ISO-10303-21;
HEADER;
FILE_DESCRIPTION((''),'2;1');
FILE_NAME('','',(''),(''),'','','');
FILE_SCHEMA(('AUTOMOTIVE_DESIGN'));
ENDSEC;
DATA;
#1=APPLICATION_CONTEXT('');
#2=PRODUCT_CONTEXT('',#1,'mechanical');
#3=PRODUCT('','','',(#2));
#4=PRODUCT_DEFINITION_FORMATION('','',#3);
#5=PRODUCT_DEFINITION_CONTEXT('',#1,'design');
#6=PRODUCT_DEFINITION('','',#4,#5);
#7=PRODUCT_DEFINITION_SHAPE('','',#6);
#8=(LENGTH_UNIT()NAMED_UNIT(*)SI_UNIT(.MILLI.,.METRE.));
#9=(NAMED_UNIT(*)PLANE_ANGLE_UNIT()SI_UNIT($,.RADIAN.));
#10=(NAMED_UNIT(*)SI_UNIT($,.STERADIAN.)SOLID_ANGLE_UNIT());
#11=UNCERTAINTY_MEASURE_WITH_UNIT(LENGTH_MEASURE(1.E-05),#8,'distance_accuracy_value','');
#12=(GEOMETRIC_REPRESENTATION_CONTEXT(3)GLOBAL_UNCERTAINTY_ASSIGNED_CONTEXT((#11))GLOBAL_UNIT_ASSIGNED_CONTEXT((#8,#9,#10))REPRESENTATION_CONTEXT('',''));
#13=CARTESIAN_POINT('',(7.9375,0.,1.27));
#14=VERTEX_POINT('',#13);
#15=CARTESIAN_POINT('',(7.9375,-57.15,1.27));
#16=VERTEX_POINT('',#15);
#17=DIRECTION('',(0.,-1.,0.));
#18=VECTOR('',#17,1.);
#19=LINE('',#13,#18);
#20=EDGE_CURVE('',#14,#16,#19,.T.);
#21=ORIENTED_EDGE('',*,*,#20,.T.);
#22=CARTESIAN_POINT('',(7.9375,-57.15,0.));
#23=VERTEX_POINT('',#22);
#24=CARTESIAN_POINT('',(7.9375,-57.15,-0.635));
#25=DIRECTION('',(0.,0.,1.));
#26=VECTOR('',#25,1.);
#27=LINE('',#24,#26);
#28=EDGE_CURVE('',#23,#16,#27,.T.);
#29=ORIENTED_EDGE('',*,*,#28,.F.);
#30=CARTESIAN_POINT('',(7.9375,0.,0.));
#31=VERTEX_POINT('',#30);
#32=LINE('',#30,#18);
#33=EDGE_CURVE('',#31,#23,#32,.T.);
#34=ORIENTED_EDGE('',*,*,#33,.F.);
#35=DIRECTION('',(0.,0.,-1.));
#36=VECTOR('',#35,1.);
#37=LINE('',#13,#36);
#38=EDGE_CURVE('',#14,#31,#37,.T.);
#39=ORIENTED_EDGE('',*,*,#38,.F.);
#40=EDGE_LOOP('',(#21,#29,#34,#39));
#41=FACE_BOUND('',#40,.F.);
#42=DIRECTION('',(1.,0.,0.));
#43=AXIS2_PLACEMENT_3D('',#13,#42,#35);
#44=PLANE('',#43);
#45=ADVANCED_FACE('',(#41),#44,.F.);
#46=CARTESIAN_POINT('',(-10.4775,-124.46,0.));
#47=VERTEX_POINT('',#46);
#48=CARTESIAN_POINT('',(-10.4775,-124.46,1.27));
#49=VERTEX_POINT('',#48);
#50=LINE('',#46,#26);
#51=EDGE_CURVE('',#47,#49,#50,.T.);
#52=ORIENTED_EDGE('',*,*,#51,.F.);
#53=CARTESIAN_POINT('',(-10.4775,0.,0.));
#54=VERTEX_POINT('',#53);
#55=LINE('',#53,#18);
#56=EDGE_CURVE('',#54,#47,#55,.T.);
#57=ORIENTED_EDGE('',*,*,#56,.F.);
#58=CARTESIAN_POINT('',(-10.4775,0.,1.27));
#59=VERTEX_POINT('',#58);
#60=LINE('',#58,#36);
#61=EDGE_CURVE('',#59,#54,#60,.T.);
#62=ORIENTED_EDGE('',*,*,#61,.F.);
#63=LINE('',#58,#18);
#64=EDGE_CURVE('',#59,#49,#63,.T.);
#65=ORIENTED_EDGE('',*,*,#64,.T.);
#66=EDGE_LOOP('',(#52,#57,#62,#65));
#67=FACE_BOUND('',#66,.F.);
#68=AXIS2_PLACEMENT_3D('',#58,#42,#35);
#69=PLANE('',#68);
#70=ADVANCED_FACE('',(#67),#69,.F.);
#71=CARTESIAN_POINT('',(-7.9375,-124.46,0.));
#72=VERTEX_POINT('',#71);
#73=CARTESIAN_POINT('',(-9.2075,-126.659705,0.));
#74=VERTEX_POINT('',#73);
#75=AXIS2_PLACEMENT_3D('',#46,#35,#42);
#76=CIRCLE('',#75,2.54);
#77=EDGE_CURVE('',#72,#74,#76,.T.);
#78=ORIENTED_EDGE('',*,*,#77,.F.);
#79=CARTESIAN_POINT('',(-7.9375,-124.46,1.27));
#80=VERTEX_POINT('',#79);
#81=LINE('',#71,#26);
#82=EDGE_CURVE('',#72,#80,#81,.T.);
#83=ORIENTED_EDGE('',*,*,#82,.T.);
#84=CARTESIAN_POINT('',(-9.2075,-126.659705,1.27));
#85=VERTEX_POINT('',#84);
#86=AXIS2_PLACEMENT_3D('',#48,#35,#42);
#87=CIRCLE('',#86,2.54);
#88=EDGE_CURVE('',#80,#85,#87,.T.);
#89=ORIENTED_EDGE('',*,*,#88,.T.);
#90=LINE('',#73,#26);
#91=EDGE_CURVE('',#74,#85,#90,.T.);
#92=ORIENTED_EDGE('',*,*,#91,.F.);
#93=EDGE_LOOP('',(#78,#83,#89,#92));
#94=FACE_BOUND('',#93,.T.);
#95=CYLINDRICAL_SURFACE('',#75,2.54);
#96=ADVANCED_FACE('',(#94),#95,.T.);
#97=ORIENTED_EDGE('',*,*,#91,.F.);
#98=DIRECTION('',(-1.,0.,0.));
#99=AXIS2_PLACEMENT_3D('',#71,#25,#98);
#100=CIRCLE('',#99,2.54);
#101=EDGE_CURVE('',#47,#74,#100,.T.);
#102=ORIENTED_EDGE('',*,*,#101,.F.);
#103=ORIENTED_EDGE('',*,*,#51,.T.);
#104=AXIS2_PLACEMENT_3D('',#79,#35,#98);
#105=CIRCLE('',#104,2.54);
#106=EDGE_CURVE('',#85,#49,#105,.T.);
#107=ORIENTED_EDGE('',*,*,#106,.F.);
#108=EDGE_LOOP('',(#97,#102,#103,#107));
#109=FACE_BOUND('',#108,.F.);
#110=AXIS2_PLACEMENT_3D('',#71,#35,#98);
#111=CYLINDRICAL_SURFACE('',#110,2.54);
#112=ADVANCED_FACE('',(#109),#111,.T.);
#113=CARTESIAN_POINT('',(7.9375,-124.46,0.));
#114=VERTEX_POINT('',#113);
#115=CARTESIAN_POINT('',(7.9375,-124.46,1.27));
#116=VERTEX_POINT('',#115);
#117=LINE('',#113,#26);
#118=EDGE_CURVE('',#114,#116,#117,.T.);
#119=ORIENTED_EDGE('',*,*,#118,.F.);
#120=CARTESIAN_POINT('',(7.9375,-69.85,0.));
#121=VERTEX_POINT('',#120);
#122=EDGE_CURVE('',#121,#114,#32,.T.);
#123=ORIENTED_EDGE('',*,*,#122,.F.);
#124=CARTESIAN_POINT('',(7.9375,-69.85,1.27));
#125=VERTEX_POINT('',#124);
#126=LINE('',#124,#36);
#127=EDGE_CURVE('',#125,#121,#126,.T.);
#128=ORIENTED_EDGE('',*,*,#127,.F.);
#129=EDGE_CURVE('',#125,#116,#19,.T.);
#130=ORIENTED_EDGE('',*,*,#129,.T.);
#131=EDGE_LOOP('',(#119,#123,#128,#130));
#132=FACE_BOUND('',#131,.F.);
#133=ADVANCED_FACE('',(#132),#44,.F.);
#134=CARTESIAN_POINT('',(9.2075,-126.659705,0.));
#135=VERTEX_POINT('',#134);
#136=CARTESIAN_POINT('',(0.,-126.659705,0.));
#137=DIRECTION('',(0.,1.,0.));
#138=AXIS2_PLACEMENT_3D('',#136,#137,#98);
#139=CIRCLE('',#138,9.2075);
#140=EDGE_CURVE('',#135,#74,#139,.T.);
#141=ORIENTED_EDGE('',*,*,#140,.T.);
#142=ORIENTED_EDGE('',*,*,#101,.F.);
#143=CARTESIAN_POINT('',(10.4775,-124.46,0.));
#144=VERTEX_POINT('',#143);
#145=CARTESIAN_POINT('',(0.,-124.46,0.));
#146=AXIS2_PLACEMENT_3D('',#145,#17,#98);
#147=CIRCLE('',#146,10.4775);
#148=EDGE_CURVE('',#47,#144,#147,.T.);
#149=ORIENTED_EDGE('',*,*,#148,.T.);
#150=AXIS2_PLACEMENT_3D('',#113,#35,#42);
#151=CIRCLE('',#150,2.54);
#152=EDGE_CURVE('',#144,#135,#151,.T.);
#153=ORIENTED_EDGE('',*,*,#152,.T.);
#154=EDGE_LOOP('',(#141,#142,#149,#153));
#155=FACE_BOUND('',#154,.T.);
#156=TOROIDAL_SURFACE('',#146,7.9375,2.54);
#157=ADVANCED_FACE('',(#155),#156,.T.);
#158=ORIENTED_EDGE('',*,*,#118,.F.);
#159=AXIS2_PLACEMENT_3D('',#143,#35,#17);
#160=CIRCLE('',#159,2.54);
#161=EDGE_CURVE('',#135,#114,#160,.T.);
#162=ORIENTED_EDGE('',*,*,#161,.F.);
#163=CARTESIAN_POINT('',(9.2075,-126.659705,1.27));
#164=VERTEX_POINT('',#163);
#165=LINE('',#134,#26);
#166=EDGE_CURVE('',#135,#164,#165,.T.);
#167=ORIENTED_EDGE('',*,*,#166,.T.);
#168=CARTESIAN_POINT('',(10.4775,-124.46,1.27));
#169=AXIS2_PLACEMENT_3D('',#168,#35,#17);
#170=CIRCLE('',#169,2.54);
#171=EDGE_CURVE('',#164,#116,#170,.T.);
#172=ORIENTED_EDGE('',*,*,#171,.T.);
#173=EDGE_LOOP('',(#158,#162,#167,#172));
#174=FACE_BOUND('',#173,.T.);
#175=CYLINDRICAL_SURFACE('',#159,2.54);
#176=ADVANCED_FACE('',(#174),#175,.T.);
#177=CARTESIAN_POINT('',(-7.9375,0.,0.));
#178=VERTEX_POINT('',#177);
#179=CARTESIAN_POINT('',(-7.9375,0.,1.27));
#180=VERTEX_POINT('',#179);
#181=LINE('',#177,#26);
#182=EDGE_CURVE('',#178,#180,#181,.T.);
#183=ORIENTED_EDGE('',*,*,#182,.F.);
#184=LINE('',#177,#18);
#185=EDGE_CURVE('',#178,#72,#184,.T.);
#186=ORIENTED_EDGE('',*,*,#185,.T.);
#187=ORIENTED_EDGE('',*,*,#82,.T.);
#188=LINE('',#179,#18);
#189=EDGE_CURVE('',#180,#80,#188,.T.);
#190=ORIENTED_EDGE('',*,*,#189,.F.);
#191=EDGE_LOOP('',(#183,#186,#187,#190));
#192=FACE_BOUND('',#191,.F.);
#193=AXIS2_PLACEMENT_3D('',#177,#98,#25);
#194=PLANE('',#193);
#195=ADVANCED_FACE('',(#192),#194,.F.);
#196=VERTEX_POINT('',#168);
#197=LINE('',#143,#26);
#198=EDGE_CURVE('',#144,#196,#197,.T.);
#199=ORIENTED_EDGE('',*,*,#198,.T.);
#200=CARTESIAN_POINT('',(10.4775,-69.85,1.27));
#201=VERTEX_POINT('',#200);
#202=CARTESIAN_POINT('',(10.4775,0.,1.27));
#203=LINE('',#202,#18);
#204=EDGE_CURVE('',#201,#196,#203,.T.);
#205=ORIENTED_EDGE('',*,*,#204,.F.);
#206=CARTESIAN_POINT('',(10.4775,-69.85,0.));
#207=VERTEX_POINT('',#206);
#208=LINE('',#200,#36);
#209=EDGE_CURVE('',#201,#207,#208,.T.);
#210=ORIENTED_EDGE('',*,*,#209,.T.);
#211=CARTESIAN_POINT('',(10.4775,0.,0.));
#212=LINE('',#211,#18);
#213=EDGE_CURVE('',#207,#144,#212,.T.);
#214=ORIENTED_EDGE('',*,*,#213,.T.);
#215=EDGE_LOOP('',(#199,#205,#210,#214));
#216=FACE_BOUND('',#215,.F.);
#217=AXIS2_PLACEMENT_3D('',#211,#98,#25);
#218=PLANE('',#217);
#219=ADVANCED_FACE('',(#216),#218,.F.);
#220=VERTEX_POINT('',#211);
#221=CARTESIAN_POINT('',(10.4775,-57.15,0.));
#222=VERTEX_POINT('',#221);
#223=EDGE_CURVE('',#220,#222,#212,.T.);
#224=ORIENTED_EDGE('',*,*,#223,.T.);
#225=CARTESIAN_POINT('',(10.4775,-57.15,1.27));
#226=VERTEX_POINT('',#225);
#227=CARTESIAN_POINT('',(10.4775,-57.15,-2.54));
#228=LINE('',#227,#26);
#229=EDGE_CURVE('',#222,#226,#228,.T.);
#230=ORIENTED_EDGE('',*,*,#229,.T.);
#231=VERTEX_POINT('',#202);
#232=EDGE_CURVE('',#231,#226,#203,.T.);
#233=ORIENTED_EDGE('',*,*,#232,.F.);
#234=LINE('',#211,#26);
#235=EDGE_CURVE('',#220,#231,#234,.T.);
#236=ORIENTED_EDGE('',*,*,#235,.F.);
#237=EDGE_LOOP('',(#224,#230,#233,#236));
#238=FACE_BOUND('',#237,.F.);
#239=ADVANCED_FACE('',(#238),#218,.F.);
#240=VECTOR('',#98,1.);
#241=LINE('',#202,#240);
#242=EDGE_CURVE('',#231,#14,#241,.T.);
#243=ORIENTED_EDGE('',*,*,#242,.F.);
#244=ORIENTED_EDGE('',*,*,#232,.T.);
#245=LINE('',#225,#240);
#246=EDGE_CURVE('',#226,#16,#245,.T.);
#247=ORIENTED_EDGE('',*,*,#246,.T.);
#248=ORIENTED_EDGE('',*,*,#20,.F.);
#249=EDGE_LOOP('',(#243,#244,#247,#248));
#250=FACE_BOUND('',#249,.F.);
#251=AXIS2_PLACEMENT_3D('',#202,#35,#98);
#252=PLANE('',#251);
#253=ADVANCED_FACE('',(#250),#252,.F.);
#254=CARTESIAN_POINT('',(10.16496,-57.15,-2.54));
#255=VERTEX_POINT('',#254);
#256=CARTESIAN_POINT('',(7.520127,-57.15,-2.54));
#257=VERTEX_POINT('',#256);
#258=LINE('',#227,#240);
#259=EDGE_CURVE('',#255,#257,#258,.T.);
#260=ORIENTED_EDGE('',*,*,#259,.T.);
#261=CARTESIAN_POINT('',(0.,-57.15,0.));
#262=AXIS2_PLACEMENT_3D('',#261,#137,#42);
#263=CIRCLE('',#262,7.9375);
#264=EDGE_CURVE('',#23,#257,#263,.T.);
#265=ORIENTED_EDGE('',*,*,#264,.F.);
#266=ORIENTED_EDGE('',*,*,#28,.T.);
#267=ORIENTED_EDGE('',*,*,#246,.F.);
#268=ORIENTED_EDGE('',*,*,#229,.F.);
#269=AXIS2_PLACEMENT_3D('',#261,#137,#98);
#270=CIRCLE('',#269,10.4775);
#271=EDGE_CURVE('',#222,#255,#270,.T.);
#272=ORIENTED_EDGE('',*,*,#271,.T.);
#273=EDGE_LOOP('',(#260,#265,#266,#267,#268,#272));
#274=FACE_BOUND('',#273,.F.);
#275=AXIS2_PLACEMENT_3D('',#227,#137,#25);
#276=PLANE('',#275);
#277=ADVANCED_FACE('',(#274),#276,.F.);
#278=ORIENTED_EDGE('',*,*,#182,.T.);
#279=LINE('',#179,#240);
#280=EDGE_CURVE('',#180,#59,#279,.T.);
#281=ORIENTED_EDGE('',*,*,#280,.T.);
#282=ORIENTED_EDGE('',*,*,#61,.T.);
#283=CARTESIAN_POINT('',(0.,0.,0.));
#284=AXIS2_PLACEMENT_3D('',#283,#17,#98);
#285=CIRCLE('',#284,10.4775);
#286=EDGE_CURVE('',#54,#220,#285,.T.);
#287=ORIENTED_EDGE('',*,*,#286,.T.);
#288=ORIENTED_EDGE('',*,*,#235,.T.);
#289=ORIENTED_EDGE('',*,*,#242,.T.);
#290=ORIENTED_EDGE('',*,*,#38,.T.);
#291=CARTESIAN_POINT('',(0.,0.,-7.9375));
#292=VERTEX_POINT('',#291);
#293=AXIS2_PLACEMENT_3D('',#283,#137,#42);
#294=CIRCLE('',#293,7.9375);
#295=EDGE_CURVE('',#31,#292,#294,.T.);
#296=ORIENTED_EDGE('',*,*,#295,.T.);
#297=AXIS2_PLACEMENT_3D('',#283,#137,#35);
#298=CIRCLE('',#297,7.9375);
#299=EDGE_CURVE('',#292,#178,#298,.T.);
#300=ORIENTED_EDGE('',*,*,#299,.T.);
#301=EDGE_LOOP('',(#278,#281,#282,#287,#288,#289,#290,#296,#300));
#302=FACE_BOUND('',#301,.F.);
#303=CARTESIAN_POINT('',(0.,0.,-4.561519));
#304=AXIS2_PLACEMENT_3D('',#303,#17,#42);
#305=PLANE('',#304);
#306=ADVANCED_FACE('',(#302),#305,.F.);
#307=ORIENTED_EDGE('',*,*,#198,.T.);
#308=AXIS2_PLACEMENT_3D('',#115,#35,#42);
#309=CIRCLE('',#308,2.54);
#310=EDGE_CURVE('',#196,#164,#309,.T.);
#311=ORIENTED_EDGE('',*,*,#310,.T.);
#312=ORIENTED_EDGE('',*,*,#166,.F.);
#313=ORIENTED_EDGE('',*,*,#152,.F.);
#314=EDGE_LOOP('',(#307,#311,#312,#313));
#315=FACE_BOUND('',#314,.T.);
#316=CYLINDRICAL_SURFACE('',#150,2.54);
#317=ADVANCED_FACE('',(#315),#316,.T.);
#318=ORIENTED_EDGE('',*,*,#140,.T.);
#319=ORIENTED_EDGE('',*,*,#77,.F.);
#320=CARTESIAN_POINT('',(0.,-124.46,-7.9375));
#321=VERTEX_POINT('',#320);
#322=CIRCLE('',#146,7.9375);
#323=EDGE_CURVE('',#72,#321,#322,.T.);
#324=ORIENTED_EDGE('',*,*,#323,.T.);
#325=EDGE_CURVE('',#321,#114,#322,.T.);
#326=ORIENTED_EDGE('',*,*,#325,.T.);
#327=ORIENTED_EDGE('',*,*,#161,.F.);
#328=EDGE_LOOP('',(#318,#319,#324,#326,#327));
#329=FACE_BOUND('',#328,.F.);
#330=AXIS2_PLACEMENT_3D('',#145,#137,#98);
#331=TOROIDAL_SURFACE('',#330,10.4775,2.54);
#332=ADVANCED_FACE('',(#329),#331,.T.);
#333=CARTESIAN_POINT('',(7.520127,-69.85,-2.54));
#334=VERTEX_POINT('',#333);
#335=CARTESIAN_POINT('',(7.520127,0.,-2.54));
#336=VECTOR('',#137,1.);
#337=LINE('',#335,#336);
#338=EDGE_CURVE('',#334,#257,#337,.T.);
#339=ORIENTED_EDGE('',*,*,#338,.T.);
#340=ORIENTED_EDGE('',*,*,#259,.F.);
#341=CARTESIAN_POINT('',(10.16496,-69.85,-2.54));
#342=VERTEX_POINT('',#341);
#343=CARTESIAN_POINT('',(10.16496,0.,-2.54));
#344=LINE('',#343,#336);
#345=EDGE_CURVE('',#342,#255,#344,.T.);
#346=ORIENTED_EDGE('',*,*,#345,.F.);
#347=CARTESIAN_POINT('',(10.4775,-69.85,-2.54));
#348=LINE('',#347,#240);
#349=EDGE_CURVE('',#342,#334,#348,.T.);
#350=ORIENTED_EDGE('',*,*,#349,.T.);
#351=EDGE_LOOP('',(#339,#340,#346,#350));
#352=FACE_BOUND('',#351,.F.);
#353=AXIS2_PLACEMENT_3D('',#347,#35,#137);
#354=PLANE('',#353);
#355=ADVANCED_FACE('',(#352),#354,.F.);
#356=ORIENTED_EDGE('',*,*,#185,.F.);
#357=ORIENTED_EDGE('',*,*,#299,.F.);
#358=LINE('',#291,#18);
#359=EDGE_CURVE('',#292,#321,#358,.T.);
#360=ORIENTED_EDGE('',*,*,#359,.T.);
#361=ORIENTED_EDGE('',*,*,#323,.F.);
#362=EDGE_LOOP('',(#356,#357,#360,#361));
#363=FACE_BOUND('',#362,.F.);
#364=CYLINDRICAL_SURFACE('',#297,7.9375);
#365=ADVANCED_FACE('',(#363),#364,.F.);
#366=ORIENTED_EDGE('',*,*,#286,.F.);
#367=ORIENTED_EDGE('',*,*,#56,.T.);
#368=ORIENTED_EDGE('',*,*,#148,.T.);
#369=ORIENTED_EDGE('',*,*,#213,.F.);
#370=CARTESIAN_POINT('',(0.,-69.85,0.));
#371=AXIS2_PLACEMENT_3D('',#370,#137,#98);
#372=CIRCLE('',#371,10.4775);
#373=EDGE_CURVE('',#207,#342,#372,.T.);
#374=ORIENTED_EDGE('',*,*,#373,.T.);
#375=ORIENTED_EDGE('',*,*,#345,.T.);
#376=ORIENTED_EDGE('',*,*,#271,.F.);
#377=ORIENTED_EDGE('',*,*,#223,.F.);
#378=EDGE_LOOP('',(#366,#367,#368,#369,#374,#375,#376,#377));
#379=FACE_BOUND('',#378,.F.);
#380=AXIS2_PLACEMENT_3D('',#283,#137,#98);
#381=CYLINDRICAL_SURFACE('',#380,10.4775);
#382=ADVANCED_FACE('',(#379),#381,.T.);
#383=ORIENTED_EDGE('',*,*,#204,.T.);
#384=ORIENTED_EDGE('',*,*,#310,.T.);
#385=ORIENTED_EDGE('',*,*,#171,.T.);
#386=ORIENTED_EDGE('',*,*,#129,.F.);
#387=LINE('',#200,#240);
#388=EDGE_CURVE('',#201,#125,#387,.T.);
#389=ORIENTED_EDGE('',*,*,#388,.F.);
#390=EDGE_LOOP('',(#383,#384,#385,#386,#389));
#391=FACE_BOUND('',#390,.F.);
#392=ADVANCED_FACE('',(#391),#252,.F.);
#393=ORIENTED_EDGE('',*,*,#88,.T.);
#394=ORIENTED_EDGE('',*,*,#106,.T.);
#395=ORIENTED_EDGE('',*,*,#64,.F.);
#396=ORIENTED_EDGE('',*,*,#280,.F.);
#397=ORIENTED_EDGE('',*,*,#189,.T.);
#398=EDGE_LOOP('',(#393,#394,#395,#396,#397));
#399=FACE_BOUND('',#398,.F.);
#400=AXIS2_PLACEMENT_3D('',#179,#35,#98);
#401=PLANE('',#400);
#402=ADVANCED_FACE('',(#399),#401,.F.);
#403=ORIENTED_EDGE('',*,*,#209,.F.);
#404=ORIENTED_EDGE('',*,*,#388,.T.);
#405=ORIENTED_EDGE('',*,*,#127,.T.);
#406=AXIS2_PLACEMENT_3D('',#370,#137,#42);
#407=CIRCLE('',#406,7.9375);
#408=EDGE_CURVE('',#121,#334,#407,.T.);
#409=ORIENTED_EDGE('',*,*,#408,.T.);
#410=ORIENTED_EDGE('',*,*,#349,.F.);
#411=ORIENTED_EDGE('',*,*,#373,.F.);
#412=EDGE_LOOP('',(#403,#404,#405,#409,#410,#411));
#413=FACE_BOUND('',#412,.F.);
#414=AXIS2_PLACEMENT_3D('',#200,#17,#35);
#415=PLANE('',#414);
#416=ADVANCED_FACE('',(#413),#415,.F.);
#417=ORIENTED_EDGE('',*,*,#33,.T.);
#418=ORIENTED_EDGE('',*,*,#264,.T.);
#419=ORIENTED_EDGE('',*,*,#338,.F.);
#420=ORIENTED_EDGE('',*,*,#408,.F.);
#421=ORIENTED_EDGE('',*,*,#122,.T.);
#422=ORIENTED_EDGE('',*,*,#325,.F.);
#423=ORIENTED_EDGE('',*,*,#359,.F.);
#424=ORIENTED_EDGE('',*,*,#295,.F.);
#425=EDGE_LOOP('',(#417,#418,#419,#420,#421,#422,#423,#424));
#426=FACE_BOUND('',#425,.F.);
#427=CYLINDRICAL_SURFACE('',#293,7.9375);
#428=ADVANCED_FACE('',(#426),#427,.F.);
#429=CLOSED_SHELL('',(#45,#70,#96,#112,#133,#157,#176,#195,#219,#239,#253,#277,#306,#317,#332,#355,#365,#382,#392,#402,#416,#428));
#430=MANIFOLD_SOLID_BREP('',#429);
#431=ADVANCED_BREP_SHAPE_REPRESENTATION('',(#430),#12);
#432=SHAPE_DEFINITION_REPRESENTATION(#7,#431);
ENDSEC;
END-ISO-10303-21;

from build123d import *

# Parameters (mm, degrees)
F1_DEPTH    = 127
F2_W        = 12.7
F2_H        = 2.54
F2_H_2      = 1.27
F3_DEPTH    = 9.525
F4_T1_DEPTH = 7.62
F4_T4_ANGLE = 180
F4_T6_ANGLE = 180


# Not quite as in the source:
# - a fillet or chamfer that OpenCascade refuses, or shapes differently, is made with other operations: its cross-section is extruded or revolved along the edge and cut away or added


with BuildPart() as f1:
    # F0 (on Front) → F1 (new body)
    with BuildSketch(Plane.XZ):
        with BuildLine():
            ThreePointArc((0, -7.9375), (-5.6126600757, -5.6126600757), (-7.9375, 0))
            Line((-7.9375, 0), (-7.9375, 1.27))
            Line((-7.9375, 1.27), (-10.4775, 1.27))
            Line((-10.4775, 1.27), (-10.4775, 0))
            ThreePointArc((-10.4775, 0), (0, -10.4775), (10.4775, 0))
            Line((10.4775, 0), (10.4775, 1.27))
            Line((10.4775, 1.27), (7.9375, 1.27))
            Line((7.9375, 1.27), (7.9375, 0))
            ThreePointArc((7.9375, 0), (5.6126600757, -5.6126600757), (0, -7.9375))
        make_face()
    extrude(amount=F1_DEPTH)

    # F2 (on face) → F3 (cut)
    with BuildSketch(Plane.YZ.offset(10.4775)):
        with Locations((-63.5, -1.27)):
            Rectangle(F2_W, F2_H)
        with Locations((-63.5, 0.635)):
            Rectangle(F2_W, F2_H_2)
    extrude(amount=-F3_DEPTH, mode=Mode.SUBTRACT)

    # F4: fillet of radius 2.54 on 2 edges, made by hand

    # F4_s2 → F4_t1 (cut)
    with BuildSketch(Plane.XY):
        with BuildLine():
            ThreePointArc((-10.4775, -124.46), (-9.7335512242, -126.2560512242), (-7.9375, -127))
            Line((-7.9375, -127), (-10.4775, -127))
            Line((-10.4775, -127), (-10.4775, -124.46))
        make_face()
        with BuildLine():
            ThreePointArc((10.4775, -124.46), (9.7335512242, -126.2560512242), (7.9375, -127))
            Line((7.9375, -127), (10.4775, -127))
            Line((10.4775, -127), (10.4775, -124.46))
        make_face()
        with BuildLine():
            ThreePointArc((-7.9375, -124.46), (-8.6814487758, -126.2560512242), (-10.4775, -127))
            Line((-10.4775, -127), (-7.9375, -127))
            Line((-7.9375, -127), (-7.9375, -124.46))
        make_face()
        with BuildLine():
            ThreePointArc((10.4775, -127), (8.6814487758, -126.2560512242), (7.9375, -124.46))
            Line((7.9375, -124.46), (7.9375, -127))
            Line((7.9375, -127), (10.4775, -127))
        make_face()
    extrude(amount=F4_T1_DEPTH, mode=Mode.SUBTRACT)

    # F4_s3 → F4_t4 (revolve, cut)
    with BuildSketch(Plane.XY):
        with BuildLine():
            ThreePointArc((-7.9375, -124.46), (-8.6814487758, -126.2560512242), (-10.4775, -127))
            Line((-10.4775, -127), (-7.9375, -127))
            Line((-7.9375, -127), (-7.9375, -124.46))
        make_face()
    revolve(axis=Axis((0, -127, 0), (0, -1, 0)), revolution_arc=F4_T4_ANGLE, mode=Mode.SUBTRACT)

    # F4_s5 → F4_t6 (revolve, cut)
    with BuildSketch(Plane.XY):
        with BuildLine():
            ThreePointArc((-10.4775, -124.46), (-9.7335512242, -126.2560512242), (-7.9375, -127))
            Line((-7.9375, -127), (-10.4775, -127))
            Line((-10.4775, -127), (-10.4775, -124.46))
        make_face()
    revolve(axis=Axis((0, -127, 0), (0, -1, 0)), revolution_arc=F4_T6_ANGLE, mode=Mode.SUBTRACT)


solid = f1.part
